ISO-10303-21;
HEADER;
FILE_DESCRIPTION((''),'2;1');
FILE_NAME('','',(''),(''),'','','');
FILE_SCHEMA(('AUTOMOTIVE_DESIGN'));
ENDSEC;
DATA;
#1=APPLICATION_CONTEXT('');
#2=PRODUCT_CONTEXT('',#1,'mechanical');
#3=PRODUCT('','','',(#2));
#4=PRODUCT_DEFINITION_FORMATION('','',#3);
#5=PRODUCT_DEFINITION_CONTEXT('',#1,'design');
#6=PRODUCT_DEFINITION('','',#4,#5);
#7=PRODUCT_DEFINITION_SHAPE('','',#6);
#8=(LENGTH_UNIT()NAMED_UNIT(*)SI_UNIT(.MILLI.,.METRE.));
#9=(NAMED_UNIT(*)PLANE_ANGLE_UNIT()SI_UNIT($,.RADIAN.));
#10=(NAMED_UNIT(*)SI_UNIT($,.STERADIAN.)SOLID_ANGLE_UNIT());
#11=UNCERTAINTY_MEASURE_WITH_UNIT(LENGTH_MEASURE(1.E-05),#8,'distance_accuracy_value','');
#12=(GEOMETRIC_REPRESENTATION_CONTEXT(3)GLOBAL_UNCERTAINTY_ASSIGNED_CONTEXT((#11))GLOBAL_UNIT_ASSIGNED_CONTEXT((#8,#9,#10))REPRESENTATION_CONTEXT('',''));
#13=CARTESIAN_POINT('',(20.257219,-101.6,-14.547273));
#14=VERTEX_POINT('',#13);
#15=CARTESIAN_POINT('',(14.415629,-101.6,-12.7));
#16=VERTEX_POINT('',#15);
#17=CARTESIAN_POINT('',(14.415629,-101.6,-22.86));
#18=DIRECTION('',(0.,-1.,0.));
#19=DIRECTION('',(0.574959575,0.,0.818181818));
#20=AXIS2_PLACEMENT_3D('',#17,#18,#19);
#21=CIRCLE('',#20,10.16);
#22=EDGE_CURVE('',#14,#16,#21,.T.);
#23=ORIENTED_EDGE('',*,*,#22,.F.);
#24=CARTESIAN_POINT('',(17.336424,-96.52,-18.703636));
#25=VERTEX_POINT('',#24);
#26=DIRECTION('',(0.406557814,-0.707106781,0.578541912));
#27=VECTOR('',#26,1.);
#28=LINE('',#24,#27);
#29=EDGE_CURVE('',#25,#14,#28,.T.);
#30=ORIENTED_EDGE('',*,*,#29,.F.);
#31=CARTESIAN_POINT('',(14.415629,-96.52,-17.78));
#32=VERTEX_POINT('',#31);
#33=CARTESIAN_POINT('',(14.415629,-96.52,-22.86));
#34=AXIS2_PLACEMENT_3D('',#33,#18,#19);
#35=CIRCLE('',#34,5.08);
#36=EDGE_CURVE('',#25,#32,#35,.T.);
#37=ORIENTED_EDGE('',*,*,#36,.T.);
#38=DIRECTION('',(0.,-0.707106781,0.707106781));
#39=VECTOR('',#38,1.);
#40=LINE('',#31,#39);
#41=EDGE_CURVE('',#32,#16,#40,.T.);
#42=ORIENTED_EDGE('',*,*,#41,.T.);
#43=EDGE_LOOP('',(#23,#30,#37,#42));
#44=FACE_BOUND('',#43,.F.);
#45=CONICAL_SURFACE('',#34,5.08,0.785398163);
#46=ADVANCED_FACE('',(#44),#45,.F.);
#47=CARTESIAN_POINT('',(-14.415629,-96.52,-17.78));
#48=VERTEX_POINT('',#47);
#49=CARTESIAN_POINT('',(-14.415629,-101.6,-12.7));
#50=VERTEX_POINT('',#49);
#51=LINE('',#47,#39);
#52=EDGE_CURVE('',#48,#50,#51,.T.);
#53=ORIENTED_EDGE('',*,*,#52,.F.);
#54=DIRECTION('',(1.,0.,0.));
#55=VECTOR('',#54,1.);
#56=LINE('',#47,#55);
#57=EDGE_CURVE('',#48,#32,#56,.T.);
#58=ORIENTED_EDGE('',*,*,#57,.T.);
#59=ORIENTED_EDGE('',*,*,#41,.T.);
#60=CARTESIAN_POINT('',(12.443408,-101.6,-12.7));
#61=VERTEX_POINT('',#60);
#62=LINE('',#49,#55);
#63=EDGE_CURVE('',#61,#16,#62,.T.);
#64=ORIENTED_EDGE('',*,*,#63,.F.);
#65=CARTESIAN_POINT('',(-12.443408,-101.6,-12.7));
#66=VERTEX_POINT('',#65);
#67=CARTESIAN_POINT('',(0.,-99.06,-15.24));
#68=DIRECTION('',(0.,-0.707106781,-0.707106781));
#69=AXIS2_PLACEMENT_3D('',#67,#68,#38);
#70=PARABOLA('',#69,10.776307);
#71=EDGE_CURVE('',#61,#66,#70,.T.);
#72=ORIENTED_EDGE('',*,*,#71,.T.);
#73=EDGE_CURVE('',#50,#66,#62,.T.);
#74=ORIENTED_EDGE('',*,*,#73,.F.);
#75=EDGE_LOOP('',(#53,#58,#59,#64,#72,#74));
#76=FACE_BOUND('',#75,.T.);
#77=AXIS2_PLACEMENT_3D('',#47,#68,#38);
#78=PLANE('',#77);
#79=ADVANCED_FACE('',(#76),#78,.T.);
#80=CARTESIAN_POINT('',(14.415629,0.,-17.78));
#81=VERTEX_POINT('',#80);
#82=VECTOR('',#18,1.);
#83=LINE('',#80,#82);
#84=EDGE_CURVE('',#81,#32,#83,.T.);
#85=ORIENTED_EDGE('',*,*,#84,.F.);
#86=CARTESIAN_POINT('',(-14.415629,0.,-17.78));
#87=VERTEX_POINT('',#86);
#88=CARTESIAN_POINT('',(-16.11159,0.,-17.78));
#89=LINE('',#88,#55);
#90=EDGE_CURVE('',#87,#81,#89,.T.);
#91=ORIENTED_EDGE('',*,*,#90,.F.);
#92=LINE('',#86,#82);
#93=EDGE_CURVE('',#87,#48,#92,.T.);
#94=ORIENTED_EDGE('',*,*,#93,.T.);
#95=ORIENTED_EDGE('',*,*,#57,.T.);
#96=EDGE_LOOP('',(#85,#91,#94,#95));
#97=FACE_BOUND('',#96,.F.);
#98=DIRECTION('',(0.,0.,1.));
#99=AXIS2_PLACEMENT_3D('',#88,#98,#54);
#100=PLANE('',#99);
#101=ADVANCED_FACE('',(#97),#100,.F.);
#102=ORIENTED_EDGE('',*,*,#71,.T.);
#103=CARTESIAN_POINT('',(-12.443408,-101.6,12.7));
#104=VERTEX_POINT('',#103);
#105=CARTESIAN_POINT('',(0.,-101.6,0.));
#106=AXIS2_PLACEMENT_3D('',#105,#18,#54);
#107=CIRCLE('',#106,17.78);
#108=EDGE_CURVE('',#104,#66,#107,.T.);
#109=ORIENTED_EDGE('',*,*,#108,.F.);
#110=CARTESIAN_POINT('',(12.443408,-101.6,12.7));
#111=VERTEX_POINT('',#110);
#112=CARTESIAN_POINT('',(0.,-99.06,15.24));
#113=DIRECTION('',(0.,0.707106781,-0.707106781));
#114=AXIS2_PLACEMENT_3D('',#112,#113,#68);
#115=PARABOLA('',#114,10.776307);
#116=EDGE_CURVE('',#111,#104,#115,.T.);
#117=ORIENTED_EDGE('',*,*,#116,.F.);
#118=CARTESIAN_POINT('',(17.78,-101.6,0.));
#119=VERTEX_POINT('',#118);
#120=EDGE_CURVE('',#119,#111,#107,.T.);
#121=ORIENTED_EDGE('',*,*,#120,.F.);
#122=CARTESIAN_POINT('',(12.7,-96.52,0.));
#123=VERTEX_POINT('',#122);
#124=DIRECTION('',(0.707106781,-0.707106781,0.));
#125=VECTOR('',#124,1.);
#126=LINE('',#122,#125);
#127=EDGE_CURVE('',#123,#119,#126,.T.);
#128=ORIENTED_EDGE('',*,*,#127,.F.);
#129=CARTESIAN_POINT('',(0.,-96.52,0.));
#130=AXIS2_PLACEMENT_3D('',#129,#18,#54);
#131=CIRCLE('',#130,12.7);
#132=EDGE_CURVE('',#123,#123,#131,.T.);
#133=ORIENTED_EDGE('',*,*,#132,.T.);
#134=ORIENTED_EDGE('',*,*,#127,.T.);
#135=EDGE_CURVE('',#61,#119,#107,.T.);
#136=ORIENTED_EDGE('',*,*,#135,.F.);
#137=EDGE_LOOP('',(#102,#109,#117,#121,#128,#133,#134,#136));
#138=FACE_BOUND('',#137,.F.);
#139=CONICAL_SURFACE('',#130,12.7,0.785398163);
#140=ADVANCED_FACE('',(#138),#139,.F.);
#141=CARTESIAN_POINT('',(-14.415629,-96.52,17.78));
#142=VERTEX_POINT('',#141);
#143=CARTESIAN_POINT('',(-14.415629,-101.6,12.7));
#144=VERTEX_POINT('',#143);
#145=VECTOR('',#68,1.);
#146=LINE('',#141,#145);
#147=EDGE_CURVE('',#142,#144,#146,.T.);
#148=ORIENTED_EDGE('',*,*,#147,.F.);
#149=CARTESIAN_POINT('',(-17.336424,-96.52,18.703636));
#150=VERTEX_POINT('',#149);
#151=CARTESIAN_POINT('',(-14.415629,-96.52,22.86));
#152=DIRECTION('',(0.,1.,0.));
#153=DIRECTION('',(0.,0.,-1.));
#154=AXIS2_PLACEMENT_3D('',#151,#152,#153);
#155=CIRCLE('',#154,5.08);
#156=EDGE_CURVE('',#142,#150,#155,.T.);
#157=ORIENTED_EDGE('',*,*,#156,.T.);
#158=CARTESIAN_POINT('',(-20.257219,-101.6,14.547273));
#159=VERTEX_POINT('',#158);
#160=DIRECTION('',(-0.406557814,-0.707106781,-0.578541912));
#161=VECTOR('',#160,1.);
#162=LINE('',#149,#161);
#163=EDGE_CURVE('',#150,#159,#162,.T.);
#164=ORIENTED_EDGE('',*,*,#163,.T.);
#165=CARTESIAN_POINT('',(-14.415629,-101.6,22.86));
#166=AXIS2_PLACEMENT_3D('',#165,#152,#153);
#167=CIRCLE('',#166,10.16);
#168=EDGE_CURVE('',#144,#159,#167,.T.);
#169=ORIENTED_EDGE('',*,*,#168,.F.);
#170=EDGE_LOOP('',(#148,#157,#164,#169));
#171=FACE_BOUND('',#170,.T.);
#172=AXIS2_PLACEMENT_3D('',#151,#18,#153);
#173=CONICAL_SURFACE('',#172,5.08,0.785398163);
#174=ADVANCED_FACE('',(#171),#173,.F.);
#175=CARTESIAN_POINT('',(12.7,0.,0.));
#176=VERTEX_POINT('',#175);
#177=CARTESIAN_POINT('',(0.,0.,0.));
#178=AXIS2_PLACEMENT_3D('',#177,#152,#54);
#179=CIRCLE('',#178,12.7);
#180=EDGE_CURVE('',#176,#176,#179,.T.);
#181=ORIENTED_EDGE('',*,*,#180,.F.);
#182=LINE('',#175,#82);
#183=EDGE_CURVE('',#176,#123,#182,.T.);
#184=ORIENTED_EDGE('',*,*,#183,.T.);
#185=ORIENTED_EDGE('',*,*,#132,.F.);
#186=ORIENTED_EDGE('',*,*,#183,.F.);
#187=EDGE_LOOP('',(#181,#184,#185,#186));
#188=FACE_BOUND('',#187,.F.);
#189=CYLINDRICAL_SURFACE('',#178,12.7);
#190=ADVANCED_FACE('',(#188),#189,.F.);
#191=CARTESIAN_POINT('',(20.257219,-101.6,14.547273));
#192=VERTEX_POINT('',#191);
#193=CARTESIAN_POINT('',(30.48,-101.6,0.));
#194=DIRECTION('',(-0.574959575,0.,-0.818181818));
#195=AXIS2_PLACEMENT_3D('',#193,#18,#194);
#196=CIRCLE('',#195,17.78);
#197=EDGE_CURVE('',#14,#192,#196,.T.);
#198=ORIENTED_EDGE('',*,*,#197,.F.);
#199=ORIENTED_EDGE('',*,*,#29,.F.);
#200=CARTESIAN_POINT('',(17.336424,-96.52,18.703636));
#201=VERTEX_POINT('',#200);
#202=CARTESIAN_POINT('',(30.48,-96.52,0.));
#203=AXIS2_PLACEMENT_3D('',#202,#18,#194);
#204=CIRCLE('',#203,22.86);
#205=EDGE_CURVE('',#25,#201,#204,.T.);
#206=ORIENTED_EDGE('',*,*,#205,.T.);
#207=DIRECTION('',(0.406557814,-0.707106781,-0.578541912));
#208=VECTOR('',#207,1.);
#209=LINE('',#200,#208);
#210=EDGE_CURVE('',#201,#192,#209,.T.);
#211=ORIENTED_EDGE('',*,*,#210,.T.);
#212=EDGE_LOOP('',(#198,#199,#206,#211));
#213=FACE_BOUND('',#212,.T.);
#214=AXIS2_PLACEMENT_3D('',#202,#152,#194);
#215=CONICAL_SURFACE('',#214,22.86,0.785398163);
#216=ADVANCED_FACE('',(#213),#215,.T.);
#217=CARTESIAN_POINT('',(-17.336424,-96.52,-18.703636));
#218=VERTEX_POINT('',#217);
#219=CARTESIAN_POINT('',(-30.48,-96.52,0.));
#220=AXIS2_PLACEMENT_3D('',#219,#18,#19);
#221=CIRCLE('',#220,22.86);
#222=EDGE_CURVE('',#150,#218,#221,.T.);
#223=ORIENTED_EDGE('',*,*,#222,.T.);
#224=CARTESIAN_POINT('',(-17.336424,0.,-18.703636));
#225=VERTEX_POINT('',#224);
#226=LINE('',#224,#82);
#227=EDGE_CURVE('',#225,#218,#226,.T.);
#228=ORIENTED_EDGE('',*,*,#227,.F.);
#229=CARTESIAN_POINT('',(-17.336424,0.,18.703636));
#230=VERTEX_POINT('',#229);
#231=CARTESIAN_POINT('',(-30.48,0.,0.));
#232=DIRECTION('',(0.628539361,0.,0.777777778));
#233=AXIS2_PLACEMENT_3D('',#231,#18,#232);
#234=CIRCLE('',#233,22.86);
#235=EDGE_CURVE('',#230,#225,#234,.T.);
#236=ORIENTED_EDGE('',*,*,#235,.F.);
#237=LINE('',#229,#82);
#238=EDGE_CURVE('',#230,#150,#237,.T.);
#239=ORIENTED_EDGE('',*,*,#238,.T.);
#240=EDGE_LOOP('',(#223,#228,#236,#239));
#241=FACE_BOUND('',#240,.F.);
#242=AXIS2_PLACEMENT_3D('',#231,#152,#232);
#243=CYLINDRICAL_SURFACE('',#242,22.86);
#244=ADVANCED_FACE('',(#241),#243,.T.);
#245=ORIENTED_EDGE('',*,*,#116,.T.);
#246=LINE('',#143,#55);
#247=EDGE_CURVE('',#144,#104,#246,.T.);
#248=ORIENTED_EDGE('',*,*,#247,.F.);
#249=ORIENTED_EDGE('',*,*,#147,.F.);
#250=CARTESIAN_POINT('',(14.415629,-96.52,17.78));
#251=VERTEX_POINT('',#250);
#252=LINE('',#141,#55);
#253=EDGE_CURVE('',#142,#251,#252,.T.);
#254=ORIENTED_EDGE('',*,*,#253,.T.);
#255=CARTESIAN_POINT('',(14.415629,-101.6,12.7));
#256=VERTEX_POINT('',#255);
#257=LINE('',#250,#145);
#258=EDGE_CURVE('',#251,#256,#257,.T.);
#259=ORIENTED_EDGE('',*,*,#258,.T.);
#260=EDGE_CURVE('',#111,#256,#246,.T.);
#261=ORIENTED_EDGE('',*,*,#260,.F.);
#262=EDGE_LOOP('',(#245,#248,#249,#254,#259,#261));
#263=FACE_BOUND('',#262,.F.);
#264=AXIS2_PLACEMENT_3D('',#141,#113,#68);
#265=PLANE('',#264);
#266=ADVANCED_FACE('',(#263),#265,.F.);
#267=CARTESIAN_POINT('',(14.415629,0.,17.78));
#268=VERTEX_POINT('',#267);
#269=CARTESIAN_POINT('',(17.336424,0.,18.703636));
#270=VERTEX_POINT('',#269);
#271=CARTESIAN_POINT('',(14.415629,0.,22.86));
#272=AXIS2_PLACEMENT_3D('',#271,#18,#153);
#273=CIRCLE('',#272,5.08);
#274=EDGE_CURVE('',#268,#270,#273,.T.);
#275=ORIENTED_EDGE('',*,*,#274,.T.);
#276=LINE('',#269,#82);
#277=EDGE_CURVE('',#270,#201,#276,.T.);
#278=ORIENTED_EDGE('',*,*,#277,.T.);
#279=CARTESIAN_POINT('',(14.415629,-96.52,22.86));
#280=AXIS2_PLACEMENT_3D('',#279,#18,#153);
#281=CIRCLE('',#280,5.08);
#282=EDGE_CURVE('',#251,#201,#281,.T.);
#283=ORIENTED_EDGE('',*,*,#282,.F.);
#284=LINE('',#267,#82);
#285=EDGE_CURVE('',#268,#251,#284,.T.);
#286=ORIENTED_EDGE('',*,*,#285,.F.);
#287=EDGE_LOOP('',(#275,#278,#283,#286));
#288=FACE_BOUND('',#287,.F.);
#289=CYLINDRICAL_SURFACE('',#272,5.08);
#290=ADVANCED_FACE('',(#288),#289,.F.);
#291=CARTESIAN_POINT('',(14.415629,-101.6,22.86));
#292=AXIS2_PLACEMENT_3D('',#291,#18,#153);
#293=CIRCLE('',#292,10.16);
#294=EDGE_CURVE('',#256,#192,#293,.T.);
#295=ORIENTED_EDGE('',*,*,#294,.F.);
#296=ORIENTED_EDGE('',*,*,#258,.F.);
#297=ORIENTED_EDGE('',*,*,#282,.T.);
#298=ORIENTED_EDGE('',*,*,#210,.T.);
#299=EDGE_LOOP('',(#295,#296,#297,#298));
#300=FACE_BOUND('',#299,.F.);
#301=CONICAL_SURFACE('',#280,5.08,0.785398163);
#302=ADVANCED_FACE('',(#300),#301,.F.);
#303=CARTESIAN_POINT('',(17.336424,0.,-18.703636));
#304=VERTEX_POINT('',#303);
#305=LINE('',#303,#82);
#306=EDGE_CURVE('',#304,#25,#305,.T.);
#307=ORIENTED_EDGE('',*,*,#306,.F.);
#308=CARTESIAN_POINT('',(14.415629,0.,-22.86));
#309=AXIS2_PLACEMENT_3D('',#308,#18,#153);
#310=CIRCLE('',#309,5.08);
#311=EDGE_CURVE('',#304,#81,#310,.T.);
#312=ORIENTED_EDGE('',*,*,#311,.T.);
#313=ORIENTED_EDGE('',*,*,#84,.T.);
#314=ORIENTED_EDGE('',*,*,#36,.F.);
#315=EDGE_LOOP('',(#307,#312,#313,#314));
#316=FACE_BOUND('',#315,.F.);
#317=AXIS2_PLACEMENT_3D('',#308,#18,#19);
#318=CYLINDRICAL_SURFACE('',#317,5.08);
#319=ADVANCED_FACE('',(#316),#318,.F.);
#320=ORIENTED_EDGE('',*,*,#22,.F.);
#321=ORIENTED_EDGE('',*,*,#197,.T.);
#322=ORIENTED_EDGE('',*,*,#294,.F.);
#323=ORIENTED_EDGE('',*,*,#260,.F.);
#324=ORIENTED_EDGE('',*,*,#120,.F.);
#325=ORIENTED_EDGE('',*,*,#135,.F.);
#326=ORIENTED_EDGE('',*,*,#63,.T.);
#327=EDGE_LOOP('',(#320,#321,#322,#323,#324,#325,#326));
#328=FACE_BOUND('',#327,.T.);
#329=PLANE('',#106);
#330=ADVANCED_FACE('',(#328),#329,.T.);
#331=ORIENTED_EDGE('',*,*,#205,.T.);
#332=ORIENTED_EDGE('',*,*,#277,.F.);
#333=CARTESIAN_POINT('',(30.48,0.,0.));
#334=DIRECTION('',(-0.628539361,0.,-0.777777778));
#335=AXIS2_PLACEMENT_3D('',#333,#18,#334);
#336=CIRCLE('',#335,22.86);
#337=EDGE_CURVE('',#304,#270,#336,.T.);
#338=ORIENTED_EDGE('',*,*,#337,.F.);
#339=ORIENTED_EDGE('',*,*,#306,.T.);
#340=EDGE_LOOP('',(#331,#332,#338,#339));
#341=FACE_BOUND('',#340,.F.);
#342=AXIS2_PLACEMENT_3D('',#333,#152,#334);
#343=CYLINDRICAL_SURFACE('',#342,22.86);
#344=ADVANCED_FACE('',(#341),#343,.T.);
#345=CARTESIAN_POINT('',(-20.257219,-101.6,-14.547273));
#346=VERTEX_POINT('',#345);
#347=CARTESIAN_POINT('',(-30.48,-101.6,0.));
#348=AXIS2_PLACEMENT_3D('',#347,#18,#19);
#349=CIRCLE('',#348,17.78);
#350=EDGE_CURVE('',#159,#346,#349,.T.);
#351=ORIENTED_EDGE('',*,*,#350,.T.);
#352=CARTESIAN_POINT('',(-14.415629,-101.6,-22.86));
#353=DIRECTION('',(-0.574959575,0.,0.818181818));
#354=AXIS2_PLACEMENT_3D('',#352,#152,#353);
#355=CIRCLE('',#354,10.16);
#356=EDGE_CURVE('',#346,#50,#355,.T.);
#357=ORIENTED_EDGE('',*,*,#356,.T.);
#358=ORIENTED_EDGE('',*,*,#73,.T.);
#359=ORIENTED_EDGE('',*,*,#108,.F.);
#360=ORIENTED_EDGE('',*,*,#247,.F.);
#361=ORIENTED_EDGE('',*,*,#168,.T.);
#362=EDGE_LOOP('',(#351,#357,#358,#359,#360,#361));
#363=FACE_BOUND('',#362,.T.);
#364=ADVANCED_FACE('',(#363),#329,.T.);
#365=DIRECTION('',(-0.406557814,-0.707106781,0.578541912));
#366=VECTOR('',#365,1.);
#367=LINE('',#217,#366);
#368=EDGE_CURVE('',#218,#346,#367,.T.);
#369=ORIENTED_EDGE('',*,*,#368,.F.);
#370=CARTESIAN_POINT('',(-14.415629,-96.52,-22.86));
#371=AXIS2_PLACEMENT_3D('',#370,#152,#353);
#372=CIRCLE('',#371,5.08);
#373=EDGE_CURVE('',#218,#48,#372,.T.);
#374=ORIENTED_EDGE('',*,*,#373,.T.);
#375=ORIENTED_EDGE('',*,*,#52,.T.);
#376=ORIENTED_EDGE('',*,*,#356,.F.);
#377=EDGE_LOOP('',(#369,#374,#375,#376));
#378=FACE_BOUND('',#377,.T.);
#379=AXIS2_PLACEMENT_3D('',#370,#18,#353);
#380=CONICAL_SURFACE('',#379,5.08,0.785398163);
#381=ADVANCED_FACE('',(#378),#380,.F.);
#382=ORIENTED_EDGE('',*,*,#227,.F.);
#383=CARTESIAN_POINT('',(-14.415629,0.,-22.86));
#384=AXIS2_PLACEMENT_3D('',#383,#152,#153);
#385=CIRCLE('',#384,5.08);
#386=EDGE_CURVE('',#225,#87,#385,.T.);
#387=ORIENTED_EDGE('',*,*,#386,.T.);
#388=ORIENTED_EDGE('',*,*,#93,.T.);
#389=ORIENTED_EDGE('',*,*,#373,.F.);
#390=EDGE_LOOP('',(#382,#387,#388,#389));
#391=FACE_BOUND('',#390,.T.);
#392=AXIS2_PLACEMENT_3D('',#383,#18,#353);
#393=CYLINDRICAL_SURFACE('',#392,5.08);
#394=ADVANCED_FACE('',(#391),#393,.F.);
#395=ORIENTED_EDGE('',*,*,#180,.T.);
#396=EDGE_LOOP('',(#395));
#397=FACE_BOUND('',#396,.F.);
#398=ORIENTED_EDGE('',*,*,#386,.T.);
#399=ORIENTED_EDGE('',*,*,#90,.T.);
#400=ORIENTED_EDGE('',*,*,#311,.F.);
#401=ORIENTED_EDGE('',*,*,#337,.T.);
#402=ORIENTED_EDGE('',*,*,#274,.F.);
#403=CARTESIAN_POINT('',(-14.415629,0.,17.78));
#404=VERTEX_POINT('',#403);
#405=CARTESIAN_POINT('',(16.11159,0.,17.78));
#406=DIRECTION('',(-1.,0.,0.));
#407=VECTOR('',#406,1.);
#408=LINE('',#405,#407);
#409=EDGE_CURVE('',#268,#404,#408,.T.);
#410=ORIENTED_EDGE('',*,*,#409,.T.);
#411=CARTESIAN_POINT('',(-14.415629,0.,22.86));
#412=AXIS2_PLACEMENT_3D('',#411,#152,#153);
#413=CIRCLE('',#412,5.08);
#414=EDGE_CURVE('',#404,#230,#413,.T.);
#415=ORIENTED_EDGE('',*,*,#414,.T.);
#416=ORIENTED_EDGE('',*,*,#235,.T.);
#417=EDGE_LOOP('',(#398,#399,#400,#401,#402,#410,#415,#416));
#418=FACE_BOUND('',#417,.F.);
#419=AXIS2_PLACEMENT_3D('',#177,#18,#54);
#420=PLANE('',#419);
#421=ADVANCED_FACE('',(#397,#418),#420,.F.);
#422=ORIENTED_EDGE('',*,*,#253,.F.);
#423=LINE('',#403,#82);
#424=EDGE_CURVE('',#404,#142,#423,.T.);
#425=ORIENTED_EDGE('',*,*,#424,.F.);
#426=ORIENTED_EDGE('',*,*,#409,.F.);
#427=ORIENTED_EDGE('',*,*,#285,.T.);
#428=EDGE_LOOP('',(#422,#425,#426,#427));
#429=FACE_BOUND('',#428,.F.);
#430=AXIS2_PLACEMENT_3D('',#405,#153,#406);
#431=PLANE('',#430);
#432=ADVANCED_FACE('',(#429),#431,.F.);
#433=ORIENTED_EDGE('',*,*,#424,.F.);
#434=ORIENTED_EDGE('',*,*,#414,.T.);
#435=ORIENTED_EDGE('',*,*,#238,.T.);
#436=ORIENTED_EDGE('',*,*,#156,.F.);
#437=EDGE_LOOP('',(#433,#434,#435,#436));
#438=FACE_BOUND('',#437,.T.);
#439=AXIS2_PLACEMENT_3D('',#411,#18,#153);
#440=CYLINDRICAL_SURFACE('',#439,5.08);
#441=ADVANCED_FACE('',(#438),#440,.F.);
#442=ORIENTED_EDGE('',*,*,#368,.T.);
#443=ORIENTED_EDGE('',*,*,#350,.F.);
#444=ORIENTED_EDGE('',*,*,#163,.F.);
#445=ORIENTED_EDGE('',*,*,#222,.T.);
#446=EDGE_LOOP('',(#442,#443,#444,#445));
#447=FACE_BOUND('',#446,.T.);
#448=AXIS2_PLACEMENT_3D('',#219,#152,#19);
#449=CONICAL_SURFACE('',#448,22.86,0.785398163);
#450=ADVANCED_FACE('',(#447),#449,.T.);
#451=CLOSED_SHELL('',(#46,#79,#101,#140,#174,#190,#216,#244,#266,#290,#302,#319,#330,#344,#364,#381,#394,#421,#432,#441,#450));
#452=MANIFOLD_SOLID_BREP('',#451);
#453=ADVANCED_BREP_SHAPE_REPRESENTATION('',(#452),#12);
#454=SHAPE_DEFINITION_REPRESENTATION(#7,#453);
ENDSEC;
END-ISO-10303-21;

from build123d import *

# Parameters (mm, degrees)
F1_DEPTH     = 101.6
F2_R         = 5.08
F3_R         = 5.08
F4_T1_DEPTH  = 28.8312589727
F4_T4_ANGLE  = 250.1936024552
F4_T6_ANGLE  = 35.0968012276
F4_T8_ANGLE  = 35.0968012276
F4_T10_ANGLE = 35.0968012276
F4_T12_ANGLE = 35.0968012276
F4_T14_ANGLE = 250.1936024552


# Not quite as in the source:
# - a fillet or chamfer that OpenCascade refuses, or shapes differently, is made with other operations: its cross-section is extruded or revolved along the edge and cut away or added


with BuildPart() as f1:
    # F0 (on Front) → F1 (new body)
    with BuildSketch(Plane.XZ):
        with BuildLine():
            Line((16.1115902063, 17.78), (-16.1115902063, 17.78))
            ThreePointArc((-16.1115902063, 17.78), (-53.34, 0), (-16.1115902063, -17.78))
            Line((-16.1115902063, -17.78), (16.1115902063, -17.78))
            ThreePointArc((16.1115902063, -17.78), (53.34, 0), (16.1115902063, 17.78))
        make_face()
        with BuildLine():
            ThreePointArc((-12.7, 0), (0, 12.7), (12.7, 0))
            ThreePointArc((12.7, 0), (0, -12.7), (-12.7, 0))
        make_face(mode=Mode.SUBTRACT)
    extrude(amount=F1_DEPTH)

    # F2
    f2_edges = [f1.edges().sort_by_distance(p)[0] for p in [
        (-16.11159, -50.8, 17.78),
        (16.11159, -50.8, 17.78),
    ]]
    fillet(f2_edges, radius=F2_R)

    # F3
    f3_edges = [f1.edges().sort_by_distance(p)[0] for p in [
        (-16.11159, -50.8, -17.78),
        (16.11159, -50.8, -17.78),
    ]]
    fillet(f3_edges, radius=F3_R)

    # F4: chamfer of 5.08 on 9 edges, made by hand

    # F4_s2 → F4_t1 (cut)
    with BuildSketch(Plane.YZ.offset(-14.4156294863)):
        Polygon((-96.52, -17.78), (-101.6, -12.7), (-101.6, -17.78), align=None)
        Polygon((-96.52, 17.78), (-101.6, 12.7), (-101.6, 17.78), align=None)
    extrude(amount=F4_T1_DEPTH, mode=Mode.SUBTRACT)

    # F4_s3 → F4_t4 (revolve, cut)
    with BuildSketch(Plane(origin=(20.4039669421, 0, -14.3384464089), x_dir=(0, 1, 0), z_dir=(-0.8181818182, 0, 0.5749595746))):
        Polygon((-96.52, 5.3352321669), (-101.6, 0.2552321669), (-101.6, 5.3352321669), align=None)
    revolve(axis=Axis((30.48, -101.6, 0), (0, -1, 0)), revolution_arc=F4_T4_ANGLE, mode=Mode.SUBTRACT)

    # F4_s5 → F4_t6 (revolve, cut)
    with BuildSketch(Plane(origin=(20.4039669421, 0, -14.3384464089), x_dir=(0, 1, 0), z_dir=(0.8181818182, 0, -0.5749595746))):
        Polygon((-96.52, -5.3352321669), (-101.6, -0.2552321669), (-101.6, -5.3352321669), align=None)
    revolve(axis=Axis((14.4156294863, -101.6, -22.86), (0, -1, 0)), revolution_arc=F4_T6_ANGLE, mode=Mode.SUBTRACT)

    # F4_s7 → F4_t8 (revolve, cut)
    with BuildSketch(Plane.YZ.offset(14.4156294863)):
        Polygon((-96.52, 17.78), (-101.6, 12.7), (-101.6, 17.78), align=None)
    revolve(axis=Axis((14.4156294863, -101.6, 22.86), (0, -1, 0)), revolution_arc=F4_T8_ANGLE, mode=Mode.SUBTRACT)

    # F4_s9 → F4_t10 (revolve, cut)
    with BuildSketch(Plane(origin=(-20.4039669421, 0, -14.3384464089), x_dir=(0, 1, 0), z_dir=(-0.8181818182, 0, -0.5749595746))):
        Polygon((-96.52, 5.3352321669), (-101.6, 0.2552321669), (-101.6, 5.3352321669), align=None)
    revolve(axis=Axis((-14.4156294863, -101.6, -22.86), (0, 1, 0)), revolution_arc=F4_T10_ANGLE, mode=Mode.SUBTRACT)

    # F4_s11 → F4_t12 (revolve, cut)
    with BuildSketch(Plane.YZ.offset(-14.4156294863)):
        Polygon((-96.52, 17.78), (-101.6, 12.7), (-101.6, 17.78), align=None)
    revolve(axis=Axis((-14.4156294863, -101.6, 22.86), (0, 1, 0)), revolution_arc=F4_T12_ANGLE, mode=Mode.SUBTRACT)

    # F4_s13 → F4_t14 (revolve, cut)
    with BuildSketch(Plane(origin=(-20.4039669421, 0, 14.3384464089), x_dir=(0, 1, 0), z_dir=(0.8181818182, 0, -0.5749595746))):
        Polygon((-96.52, 5.3352321669), (-101.6, 0.2552321669), (-101.6, 5.3352321669), align=None)
    revolve(axis=Axis((-30.48, -101.6, 0), (0, -1, 0)), revolution_arc=F4_T14_ANGLE, mode=Mode.SUBTRACT)

    # F4_s15 → F4_t16 (revolve, cut)
    with BuildSketch(Plane.XY):
        Polygon((12.7, -96.52), (17.78, -101.6), (12.7, -101.6), align=None)
    revolve(axis=Axis((0, -101.6, 0), (0, -1, 0)), mode=Mode.SUBTRACT)


solid = f1.part
